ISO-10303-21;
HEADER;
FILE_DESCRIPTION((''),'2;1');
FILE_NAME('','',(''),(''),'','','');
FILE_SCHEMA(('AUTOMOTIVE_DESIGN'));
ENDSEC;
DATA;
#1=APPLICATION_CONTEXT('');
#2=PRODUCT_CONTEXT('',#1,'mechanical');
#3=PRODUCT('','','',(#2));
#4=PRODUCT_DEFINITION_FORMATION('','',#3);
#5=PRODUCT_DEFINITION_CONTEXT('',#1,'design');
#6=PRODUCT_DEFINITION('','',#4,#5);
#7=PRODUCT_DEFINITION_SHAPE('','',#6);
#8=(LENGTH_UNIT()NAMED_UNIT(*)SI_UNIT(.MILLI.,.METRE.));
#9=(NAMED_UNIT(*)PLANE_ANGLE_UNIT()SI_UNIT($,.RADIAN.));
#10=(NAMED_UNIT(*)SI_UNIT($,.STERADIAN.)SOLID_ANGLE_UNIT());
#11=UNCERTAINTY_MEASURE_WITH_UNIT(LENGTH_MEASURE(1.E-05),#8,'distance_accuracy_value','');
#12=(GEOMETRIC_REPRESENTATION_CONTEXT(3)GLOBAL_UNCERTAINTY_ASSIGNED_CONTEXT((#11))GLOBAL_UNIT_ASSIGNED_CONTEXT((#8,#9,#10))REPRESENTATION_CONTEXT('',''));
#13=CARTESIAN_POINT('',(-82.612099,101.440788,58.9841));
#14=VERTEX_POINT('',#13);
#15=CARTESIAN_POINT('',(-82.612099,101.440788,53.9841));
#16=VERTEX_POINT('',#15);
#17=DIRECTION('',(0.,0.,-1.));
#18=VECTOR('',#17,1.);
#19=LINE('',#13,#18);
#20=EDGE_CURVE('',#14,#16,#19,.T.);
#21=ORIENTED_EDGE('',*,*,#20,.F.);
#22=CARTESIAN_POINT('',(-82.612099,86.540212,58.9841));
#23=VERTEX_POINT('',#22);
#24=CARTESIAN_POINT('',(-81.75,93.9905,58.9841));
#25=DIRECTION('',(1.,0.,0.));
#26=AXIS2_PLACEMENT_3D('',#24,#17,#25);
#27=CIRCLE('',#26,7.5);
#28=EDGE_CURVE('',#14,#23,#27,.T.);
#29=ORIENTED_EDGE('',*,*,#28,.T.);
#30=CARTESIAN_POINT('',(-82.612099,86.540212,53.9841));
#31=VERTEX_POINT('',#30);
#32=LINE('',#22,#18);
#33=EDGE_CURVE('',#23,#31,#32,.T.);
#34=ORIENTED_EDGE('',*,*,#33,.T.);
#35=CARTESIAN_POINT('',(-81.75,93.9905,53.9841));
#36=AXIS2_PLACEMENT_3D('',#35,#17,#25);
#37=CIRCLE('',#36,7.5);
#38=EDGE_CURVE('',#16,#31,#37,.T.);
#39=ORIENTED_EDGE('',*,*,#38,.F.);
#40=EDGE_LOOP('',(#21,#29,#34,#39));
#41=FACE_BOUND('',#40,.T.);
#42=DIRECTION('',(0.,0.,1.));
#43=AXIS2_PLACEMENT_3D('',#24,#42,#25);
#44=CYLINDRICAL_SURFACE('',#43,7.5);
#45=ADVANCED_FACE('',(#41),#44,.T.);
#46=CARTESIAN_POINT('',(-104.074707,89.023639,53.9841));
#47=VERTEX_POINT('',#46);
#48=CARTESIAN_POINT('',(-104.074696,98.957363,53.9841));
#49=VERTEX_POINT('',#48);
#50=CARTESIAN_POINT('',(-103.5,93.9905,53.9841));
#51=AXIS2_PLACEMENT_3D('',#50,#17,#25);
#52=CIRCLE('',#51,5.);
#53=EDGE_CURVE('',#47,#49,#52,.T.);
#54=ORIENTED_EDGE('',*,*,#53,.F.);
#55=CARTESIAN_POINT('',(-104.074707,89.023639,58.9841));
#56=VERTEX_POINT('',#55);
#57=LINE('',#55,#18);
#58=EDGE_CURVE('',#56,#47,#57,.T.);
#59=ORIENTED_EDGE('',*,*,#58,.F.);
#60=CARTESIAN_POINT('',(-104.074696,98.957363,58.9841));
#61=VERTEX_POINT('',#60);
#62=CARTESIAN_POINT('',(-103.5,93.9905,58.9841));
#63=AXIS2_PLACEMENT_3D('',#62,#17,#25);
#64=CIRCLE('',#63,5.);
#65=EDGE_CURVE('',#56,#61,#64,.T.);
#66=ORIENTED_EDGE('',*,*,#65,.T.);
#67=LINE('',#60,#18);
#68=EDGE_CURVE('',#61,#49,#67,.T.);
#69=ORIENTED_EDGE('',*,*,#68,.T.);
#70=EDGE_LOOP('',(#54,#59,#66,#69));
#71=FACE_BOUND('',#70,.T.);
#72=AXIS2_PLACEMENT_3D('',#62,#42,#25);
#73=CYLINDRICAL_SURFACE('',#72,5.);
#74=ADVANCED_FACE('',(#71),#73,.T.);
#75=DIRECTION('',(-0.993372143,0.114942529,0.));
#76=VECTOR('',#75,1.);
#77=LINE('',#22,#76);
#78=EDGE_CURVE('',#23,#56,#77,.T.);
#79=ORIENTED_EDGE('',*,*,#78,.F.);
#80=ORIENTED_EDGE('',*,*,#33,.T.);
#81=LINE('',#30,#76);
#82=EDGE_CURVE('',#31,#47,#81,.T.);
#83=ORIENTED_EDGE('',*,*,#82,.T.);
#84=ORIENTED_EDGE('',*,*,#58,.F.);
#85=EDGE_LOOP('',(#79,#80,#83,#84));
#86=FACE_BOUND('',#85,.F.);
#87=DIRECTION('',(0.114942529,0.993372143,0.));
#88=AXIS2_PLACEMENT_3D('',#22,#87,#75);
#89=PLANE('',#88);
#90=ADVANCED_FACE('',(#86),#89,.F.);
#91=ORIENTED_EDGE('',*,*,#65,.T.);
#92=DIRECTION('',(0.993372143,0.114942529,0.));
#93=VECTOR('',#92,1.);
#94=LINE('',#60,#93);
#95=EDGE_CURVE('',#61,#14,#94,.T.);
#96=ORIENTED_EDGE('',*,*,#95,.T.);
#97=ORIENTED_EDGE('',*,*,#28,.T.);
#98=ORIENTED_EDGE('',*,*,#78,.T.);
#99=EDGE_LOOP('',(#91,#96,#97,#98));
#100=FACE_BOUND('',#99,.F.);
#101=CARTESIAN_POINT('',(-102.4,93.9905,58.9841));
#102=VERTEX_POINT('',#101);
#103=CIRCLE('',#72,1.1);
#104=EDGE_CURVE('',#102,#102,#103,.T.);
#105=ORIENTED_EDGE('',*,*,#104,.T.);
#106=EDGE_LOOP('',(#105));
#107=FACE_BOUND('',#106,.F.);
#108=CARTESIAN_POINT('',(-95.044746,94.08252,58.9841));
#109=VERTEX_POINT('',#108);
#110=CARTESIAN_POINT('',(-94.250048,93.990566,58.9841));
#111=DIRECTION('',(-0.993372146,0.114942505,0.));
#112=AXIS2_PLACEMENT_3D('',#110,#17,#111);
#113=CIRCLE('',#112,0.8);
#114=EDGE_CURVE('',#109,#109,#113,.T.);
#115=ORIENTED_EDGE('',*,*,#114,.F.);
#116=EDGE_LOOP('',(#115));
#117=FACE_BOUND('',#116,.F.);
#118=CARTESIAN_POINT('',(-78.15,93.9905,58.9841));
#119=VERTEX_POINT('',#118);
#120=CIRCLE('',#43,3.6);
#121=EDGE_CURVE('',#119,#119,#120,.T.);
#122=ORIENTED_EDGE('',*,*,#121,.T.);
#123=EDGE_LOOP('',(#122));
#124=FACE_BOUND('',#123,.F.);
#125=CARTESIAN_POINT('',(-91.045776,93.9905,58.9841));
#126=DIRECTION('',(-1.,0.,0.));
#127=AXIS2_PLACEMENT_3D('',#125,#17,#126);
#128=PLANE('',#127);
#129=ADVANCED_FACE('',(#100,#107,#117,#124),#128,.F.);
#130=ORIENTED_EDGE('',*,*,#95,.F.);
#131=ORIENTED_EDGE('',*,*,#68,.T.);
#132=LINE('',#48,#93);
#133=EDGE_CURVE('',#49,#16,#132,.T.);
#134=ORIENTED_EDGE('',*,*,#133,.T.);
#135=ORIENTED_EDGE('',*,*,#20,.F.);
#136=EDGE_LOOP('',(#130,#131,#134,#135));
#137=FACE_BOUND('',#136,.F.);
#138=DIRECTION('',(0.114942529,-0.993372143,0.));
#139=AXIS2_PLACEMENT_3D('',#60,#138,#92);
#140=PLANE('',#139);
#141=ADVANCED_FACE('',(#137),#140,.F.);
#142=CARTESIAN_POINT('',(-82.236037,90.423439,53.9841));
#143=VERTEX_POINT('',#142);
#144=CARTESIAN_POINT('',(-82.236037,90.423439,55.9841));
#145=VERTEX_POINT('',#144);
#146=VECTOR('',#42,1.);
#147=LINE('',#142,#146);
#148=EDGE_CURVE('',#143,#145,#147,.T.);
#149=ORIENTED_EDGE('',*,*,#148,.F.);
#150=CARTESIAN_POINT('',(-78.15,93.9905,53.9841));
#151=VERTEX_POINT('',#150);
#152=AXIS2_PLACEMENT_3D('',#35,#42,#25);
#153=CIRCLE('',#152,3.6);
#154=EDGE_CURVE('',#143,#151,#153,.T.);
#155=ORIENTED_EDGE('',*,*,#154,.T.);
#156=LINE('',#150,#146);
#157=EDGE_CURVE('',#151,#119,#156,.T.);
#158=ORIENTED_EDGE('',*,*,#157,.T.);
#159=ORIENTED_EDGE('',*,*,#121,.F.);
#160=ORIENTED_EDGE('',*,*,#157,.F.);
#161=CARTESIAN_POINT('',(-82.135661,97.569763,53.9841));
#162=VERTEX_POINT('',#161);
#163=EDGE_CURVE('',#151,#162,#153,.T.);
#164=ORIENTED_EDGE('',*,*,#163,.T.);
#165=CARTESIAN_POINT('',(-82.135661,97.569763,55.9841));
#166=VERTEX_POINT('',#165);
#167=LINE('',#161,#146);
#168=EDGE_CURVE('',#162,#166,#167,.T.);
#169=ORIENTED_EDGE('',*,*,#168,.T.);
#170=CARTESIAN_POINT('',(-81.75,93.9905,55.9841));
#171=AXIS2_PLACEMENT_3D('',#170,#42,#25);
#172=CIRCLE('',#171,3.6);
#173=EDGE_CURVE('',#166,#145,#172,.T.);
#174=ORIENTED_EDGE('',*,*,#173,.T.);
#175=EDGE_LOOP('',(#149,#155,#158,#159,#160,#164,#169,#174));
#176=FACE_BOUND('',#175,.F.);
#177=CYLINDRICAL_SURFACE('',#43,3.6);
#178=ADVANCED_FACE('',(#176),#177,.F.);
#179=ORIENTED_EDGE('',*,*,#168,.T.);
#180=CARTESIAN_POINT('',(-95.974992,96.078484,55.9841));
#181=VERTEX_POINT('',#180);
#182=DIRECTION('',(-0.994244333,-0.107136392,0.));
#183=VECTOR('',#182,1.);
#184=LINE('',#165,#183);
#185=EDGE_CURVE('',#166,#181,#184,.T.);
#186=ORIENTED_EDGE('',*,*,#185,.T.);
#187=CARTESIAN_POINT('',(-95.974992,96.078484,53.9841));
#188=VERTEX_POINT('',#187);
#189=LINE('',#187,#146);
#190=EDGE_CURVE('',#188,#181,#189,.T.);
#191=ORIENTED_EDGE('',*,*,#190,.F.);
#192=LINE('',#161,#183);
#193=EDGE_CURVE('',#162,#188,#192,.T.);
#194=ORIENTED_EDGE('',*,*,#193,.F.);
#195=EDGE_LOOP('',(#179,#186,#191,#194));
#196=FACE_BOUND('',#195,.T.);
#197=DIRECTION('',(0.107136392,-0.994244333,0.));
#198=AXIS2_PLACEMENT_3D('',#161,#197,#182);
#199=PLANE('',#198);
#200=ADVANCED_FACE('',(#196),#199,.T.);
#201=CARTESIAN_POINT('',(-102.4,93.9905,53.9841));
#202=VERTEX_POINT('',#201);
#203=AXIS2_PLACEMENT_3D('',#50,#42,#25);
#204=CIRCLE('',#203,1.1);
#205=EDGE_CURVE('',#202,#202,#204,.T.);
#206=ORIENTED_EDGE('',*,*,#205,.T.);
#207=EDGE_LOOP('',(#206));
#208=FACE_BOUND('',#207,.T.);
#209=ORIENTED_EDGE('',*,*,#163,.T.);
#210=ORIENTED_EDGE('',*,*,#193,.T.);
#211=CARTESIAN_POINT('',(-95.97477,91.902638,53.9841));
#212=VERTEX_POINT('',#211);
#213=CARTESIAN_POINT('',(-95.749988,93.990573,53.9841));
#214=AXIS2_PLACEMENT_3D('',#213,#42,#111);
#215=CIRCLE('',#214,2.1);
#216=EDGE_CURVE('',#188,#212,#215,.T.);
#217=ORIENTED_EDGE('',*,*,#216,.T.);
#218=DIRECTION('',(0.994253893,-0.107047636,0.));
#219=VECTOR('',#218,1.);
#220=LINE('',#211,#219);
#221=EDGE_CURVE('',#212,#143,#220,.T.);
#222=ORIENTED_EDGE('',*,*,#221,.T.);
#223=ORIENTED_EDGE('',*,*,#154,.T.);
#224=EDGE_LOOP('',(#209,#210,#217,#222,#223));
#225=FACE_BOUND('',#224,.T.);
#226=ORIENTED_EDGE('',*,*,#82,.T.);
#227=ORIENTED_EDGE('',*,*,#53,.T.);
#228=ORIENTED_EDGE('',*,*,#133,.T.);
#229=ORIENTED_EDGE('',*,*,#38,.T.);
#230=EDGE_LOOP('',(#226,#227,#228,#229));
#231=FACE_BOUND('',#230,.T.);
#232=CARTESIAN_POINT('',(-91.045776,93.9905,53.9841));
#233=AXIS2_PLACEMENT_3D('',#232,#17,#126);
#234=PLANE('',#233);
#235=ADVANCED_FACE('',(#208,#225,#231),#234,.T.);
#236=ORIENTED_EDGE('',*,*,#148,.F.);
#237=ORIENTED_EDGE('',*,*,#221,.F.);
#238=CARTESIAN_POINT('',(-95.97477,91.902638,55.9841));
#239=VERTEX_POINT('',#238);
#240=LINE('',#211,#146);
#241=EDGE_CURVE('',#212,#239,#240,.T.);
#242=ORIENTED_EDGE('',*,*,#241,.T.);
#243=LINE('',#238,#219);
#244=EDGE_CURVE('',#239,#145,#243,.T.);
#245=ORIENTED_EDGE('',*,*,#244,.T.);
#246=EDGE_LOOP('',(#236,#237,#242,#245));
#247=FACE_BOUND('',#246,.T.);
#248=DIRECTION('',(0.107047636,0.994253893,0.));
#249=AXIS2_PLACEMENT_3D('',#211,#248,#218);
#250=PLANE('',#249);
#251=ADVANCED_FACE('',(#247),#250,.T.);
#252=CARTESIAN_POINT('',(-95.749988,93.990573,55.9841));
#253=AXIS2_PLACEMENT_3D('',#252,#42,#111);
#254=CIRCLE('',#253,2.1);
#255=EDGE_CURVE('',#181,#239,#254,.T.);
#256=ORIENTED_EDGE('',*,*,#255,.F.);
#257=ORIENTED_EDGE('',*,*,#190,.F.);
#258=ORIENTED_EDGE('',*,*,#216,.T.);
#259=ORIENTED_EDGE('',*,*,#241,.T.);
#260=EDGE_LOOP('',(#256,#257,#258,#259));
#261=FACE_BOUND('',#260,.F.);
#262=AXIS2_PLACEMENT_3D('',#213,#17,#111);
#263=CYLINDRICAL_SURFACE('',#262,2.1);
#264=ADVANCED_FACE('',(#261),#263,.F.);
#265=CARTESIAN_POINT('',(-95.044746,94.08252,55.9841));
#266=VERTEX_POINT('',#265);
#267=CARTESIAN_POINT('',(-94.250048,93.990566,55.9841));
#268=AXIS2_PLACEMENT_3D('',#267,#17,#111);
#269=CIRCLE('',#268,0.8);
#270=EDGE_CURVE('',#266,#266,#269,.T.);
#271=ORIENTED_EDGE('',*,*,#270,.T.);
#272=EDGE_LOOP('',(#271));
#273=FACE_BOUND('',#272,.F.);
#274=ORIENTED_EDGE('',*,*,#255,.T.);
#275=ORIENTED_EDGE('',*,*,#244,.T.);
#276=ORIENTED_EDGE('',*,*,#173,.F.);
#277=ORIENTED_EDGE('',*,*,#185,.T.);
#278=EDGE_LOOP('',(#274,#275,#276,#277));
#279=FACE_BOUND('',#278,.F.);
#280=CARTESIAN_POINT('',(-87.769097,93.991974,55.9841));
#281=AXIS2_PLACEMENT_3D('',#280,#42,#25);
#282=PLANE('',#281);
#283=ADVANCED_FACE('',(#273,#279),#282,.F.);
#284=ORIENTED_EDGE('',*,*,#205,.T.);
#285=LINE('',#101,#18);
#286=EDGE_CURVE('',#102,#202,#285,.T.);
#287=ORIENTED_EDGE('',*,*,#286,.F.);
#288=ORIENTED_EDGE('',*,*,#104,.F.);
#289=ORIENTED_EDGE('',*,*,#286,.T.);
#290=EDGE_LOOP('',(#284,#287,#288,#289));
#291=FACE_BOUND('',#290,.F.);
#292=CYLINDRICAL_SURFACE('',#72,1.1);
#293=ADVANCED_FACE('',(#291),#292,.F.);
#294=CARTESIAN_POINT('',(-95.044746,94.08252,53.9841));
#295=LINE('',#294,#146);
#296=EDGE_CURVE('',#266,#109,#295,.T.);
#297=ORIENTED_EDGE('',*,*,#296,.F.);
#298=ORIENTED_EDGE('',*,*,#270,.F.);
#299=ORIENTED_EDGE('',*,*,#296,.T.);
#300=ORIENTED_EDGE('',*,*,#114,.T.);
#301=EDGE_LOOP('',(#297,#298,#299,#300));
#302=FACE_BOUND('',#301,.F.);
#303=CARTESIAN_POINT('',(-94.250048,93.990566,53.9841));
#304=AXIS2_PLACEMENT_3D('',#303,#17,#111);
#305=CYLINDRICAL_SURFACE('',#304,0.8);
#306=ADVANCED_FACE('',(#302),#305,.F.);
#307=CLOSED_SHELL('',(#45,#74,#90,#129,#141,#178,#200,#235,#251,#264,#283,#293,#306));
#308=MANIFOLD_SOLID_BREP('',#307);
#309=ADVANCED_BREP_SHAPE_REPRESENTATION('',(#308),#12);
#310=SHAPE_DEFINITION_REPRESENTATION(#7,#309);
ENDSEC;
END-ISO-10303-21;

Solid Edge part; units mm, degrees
sketch "Sketch1" plane through (0, 0, 58.9841) normal (0, 0, 1) x (1, 0, 0)
  arc A0 (-104.0747, 89.0237) -> (-104.0747, 98.9574) centre (-103.5, 93.9905) cw
  line L0 (-104.0747, 98.9574) -> (-82.6121, 101.4408)
  arc A1 (-82.6121, 101.4408) -> (-82.6121, 86.5402) centre (-81.75, 93.9905) cw
  line L1 (-82.6121, 86.5402) -> (-104.0747, 89.0237)
  circle A2 centre (-81.75, 93.9905) radius 3.6
  circle A3 centre (-103.5, 93.9905) radius 1.1
extrude "Protrusion1" add sketch "Sketch1" against normal blind 5
sketch "Sketch2" plane through (-91.375, 93.9905, 53.9841) normal (0, 0, -1) x (-0.9933721, 0.1149425, 0)
  circle A0 centre (2.856, -0.3304) radius 0.8
extrude "Cutout1" cut sketch "Sketch2" against normal through all
sketch "Sketch3" plane through (-91.375, 93.9905, 53.9841) normal (0, 0, -1) x (-0.9933721, 0.1149425, 0)
  line L0 (-8.7667, 4.6175) -> (4.8095, 1.5454)
  arc A0 (4.8095, 1.5454) -> (4.3293, -2.6027) centre (4.346, -0.5028) cw
  line L1 (4.3293, -2.6027) -> (-9.4884, -2.4929)
  arc A1 (-9.4884, -2.4929) -> (-8.7667, 4.6175) centre (-9.5612, 1.1063) cw
extrude "Cutout2" cut sketch "Sketch3" against normal blind 2
